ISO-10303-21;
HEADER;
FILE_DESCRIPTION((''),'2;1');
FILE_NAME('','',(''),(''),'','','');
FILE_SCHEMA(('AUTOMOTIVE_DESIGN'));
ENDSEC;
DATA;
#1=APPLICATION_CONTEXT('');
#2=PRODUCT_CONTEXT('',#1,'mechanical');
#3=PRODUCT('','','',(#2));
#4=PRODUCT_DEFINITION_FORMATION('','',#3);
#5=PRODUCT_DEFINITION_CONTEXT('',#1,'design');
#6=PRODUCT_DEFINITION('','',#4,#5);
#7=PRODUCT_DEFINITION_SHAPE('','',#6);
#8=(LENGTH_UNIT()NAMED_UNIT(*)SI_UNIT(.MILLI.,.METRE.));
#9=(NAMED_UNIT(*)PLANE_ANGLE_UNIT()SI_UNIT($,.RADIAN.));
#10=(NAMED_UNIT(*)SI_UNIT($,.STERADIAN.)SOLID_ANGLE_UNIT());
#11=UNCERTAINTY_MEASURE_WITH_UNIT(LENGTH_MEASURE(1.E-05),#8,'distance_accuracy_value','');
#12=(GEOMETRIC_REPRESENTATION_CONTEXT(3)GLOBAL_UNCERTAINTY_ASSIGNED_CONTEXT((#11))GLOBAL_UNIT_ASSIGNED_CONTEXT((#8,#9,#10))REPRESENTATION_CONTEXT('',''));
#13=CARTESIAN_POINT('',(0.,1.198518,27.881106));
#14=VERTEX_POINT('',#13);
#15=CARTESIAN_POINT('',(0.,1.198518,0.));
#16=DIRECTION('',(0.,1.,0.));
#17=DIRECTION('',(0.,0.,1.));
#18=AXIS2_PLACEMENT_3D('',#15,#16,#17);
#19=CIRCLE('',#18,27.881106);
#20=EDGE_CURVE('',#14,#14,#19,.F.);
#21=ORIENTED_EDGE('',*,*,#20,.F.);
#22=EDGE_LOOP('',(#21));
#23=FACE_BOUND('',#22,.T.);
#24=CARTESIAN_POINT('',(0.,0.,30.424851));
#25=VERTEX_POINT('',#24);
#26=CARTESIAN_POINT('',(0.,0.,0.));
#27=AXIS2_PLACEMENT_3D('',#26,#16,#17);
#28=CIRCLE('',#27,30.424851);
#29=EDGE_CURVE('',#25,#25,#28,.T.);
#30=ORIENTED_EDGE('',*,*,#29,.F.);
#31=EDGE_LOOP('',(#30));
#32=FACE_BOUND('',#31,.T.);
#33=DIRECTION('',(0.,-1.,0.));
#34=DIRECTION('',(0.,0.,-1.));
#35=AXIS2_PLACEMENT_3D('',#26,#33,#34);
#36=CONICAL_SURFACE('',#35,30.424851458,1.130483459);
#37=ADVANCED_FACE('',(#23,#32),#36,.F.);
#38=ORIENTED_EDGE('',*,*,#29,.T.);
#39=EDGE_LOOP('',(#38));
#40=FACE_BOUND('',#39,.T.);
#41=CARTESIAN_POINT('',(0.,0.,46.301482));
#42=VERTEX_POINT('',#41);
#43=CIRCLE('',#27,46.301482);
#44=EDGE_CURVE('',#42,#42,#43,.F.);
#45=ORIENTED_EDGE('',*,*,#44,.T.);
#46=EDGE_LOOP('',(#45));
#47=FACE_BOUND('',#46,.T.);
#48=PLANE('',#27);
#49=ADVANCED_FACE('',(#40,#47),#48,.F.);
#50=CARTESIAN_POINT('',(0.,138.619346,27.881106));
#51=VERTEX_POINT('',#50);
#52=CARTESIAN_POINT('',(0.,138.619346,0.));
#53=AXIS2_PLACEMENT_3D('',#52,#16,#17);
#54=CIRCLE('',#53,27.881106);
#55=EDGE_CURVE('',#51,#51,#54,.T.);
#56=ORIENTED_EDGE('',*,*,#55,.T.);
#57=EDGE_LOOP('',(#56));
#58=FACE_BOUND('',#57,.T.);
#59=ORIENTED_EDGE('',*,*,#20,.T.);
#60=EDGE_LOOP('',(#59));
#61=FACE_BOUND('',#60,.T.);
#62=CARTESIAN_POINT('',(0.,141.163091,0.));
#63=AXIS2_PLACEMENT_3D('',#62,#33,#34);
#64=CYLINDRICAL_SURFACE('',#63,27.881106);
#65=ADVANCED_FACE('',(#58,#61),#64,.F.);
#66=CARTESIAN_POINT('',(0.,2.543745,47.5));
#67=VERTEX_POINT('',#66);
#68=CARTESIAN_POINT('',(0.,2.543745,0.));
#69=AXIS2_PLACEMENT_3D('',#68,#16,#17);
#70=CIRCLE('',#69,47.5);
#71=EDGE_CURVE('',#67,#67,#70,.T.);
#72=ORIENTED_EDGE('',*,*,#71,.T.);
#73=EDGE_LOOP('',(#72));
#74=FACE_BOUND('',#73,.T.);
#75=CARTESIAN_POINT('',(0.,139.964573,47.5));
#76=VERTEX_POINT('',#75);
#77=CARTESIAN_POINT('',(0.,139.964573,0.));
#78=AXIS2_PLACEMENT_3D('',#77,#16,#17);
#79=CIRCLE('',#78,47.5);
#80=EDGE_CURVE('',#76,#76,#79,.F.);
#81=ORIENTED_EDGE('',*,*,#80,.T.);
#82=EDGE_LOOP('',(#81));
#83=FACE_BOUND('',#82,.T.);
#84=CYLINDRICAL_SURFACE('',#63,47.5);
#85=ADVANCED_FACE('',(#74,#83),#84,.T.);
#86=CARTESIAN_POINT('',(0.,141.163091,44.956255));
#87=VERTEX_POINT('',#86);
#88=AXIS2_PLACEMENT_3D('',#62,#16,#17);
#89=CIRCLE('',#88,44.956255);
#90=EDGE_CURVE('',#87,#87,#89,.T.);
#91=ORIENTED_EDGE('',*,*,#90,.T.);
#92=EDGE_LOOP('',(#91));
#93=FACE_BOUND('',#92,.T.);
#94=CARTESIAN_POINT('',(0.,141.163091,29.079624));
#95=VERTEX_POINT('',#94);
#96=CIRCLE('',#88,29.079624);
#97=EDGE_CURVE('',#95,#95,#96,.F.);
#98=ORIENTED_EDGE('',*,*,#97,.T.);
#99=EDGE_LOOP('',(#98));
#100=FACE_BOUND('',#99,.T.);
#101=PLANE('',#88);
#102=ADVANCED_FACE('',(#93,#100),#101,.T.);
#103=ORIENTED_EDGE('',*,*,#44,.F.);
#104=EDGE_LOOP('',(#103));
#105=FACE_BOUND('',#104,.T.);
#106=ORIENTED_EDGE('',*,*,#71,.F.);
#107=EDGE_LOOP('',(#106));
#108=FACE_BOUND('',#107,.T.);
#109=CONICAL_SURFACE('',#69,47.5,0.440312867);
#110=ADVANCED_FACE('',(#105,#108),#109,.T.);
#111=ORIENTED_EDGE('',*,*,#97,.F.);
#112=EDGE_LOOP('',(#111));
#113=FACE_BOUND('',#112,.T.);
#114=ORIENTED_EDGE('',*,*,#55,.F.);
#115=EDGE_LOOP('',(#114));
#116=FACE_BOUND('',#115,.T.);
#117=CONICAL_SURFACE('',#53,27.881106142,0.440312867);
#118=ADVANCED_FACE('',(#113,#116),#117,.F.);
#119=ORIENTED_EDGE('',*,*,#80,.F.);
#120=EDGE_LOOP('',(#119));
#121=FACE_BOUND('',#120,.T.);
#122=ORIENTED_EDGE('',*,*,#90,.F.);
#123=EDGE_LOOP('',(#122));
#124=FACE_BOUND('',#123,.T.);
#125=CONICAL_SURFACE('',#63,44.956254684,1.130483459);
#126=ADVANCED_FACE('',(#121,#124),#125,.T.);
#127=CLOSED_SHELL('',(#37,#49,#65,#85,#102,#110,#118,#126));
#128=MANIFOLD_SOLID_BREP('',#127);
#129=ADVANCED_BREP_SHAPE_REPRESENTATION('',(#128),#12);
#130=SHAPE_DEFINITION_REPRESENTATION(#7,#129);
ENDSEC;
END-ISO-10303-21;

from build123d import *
from OCP.BRepFilletAPI import BRepFilletAPI_MakeChamfer

# Parameters (mm, degrees)
SKETCH1_R           = 47.5
BOSS_EXTRUDE1_DEPTH = 141.163090888
SKETCH2_R           = 27.881106142
CUT_EXTRUDE1_DEPTH  = 157.331437111
CHAMFER1_SIZE       = 1.198518148
CHAMFER1_SIZE2      = 2.543745316


with BuildPart() as part:
    # Sketch1 → Boss-Extrude1 (new body)
    with BuildSketch(Plane(origin=(0, 0, 0), x_dir=(1, 0, 0), z_dir=(0, 1, 0))):
        Circle(SKETCH1_R)
    extrude(amount=BOSS_EXTRUDE1_DEPTH)

    # Sketch2 → Cut-Extrude1 (cut, through all)
    with BuildSketch(Plane(origin=(0, 0, 0), x_dir=(1, 0, 0), z_dir=(0, 1, 0))):
        Circle(SKETCH2_R)
    extrude(amount=CUT_EXTRUDE1_DEPTH, mode=Mode.SUBTRACT)

    # Chamfer1: one chamfer whose edges measure the first distance from different faces: ONE call of the kernel's chamfer builder (chamfer() names one face for all edges)
    chamfer1_edges_1 = [part.edges().sort_by_distance(p)[0] for p in [
        (-27.881106142, 141.163090888, 0),
    ]]
    chamfer1_side_1 = [part.faces().sort_by_distance(p)[0] for p in [
        (-46.156497116, 141.163090888, 0),
    ]]
    chamfer1_edges_2 = [part.edges().sort_by_distance(p)[0] for p in [
        (-27.881106142, 0, 0),
    ]]
    chamfer1_side_2 = [part.faces().sort_by_distance(p)[0] for p in [
        (-27.881106142, 70.581545444, 0),
    ]]
    chamfer1_edges_3 = [part.edges().sort_by_distance(p)[0] for p in [
        (-47.5, 0, 0),
    ]]
    chamfer1_side_3 = [part.faces().sort_by_distance(p)[0] for p in [
        (-46.156497116, 0, 0),
    ]]
    chamfer1_edges_4 = [part.edges().sort_by_distance(p)[0] for p in [
        (-47.5, 141.163090888, 0),
    ]]
    chamfer1_side_4 = [part.faces().sort_by_distance(p)[0] for p in [
        (-47.5, 70.581545444, 0),
    ]]
    chamfer1 = BRepFilletAPI_MakeChamfer(part.part.solid().wrapped)
    for e in chamfer1_edges_1:
        chamfer1.Add(CHAMFER1_SIZE, CHAMFER1_SIZE2, e.wrapped, chamfer1_side_1[0].wrapped)  # the first distance lies on this face
    for e in chamfer1_edges_2:
        chamfer1.Add(CHAMFER1_SIZE, CHAMFER1_SIZE2, e.wrapped, chamfer1_side_2[0].wrapped)  # the first distance lies on this face
    for e in chamfer1_edges_3:
        chamfer1.Add(CHAMFER1_SIZE, CHAMFER1_SIZE2, e.wrapped, chamfer1_side_3[0].wrapped)  # the first distance lies on this face
    for e in chamfer1_edges_4:
        chamfer1.Add(CHAMFER1_SIZE, CHAMFER1_SIZE2, e.wrapped, chamfer1_side_4[0].wrapped)  # the first distance lies on this face
    add(Compound.cast(chamfer1.Shape()), mode=Mode.REPLACE)


solid = part.part
